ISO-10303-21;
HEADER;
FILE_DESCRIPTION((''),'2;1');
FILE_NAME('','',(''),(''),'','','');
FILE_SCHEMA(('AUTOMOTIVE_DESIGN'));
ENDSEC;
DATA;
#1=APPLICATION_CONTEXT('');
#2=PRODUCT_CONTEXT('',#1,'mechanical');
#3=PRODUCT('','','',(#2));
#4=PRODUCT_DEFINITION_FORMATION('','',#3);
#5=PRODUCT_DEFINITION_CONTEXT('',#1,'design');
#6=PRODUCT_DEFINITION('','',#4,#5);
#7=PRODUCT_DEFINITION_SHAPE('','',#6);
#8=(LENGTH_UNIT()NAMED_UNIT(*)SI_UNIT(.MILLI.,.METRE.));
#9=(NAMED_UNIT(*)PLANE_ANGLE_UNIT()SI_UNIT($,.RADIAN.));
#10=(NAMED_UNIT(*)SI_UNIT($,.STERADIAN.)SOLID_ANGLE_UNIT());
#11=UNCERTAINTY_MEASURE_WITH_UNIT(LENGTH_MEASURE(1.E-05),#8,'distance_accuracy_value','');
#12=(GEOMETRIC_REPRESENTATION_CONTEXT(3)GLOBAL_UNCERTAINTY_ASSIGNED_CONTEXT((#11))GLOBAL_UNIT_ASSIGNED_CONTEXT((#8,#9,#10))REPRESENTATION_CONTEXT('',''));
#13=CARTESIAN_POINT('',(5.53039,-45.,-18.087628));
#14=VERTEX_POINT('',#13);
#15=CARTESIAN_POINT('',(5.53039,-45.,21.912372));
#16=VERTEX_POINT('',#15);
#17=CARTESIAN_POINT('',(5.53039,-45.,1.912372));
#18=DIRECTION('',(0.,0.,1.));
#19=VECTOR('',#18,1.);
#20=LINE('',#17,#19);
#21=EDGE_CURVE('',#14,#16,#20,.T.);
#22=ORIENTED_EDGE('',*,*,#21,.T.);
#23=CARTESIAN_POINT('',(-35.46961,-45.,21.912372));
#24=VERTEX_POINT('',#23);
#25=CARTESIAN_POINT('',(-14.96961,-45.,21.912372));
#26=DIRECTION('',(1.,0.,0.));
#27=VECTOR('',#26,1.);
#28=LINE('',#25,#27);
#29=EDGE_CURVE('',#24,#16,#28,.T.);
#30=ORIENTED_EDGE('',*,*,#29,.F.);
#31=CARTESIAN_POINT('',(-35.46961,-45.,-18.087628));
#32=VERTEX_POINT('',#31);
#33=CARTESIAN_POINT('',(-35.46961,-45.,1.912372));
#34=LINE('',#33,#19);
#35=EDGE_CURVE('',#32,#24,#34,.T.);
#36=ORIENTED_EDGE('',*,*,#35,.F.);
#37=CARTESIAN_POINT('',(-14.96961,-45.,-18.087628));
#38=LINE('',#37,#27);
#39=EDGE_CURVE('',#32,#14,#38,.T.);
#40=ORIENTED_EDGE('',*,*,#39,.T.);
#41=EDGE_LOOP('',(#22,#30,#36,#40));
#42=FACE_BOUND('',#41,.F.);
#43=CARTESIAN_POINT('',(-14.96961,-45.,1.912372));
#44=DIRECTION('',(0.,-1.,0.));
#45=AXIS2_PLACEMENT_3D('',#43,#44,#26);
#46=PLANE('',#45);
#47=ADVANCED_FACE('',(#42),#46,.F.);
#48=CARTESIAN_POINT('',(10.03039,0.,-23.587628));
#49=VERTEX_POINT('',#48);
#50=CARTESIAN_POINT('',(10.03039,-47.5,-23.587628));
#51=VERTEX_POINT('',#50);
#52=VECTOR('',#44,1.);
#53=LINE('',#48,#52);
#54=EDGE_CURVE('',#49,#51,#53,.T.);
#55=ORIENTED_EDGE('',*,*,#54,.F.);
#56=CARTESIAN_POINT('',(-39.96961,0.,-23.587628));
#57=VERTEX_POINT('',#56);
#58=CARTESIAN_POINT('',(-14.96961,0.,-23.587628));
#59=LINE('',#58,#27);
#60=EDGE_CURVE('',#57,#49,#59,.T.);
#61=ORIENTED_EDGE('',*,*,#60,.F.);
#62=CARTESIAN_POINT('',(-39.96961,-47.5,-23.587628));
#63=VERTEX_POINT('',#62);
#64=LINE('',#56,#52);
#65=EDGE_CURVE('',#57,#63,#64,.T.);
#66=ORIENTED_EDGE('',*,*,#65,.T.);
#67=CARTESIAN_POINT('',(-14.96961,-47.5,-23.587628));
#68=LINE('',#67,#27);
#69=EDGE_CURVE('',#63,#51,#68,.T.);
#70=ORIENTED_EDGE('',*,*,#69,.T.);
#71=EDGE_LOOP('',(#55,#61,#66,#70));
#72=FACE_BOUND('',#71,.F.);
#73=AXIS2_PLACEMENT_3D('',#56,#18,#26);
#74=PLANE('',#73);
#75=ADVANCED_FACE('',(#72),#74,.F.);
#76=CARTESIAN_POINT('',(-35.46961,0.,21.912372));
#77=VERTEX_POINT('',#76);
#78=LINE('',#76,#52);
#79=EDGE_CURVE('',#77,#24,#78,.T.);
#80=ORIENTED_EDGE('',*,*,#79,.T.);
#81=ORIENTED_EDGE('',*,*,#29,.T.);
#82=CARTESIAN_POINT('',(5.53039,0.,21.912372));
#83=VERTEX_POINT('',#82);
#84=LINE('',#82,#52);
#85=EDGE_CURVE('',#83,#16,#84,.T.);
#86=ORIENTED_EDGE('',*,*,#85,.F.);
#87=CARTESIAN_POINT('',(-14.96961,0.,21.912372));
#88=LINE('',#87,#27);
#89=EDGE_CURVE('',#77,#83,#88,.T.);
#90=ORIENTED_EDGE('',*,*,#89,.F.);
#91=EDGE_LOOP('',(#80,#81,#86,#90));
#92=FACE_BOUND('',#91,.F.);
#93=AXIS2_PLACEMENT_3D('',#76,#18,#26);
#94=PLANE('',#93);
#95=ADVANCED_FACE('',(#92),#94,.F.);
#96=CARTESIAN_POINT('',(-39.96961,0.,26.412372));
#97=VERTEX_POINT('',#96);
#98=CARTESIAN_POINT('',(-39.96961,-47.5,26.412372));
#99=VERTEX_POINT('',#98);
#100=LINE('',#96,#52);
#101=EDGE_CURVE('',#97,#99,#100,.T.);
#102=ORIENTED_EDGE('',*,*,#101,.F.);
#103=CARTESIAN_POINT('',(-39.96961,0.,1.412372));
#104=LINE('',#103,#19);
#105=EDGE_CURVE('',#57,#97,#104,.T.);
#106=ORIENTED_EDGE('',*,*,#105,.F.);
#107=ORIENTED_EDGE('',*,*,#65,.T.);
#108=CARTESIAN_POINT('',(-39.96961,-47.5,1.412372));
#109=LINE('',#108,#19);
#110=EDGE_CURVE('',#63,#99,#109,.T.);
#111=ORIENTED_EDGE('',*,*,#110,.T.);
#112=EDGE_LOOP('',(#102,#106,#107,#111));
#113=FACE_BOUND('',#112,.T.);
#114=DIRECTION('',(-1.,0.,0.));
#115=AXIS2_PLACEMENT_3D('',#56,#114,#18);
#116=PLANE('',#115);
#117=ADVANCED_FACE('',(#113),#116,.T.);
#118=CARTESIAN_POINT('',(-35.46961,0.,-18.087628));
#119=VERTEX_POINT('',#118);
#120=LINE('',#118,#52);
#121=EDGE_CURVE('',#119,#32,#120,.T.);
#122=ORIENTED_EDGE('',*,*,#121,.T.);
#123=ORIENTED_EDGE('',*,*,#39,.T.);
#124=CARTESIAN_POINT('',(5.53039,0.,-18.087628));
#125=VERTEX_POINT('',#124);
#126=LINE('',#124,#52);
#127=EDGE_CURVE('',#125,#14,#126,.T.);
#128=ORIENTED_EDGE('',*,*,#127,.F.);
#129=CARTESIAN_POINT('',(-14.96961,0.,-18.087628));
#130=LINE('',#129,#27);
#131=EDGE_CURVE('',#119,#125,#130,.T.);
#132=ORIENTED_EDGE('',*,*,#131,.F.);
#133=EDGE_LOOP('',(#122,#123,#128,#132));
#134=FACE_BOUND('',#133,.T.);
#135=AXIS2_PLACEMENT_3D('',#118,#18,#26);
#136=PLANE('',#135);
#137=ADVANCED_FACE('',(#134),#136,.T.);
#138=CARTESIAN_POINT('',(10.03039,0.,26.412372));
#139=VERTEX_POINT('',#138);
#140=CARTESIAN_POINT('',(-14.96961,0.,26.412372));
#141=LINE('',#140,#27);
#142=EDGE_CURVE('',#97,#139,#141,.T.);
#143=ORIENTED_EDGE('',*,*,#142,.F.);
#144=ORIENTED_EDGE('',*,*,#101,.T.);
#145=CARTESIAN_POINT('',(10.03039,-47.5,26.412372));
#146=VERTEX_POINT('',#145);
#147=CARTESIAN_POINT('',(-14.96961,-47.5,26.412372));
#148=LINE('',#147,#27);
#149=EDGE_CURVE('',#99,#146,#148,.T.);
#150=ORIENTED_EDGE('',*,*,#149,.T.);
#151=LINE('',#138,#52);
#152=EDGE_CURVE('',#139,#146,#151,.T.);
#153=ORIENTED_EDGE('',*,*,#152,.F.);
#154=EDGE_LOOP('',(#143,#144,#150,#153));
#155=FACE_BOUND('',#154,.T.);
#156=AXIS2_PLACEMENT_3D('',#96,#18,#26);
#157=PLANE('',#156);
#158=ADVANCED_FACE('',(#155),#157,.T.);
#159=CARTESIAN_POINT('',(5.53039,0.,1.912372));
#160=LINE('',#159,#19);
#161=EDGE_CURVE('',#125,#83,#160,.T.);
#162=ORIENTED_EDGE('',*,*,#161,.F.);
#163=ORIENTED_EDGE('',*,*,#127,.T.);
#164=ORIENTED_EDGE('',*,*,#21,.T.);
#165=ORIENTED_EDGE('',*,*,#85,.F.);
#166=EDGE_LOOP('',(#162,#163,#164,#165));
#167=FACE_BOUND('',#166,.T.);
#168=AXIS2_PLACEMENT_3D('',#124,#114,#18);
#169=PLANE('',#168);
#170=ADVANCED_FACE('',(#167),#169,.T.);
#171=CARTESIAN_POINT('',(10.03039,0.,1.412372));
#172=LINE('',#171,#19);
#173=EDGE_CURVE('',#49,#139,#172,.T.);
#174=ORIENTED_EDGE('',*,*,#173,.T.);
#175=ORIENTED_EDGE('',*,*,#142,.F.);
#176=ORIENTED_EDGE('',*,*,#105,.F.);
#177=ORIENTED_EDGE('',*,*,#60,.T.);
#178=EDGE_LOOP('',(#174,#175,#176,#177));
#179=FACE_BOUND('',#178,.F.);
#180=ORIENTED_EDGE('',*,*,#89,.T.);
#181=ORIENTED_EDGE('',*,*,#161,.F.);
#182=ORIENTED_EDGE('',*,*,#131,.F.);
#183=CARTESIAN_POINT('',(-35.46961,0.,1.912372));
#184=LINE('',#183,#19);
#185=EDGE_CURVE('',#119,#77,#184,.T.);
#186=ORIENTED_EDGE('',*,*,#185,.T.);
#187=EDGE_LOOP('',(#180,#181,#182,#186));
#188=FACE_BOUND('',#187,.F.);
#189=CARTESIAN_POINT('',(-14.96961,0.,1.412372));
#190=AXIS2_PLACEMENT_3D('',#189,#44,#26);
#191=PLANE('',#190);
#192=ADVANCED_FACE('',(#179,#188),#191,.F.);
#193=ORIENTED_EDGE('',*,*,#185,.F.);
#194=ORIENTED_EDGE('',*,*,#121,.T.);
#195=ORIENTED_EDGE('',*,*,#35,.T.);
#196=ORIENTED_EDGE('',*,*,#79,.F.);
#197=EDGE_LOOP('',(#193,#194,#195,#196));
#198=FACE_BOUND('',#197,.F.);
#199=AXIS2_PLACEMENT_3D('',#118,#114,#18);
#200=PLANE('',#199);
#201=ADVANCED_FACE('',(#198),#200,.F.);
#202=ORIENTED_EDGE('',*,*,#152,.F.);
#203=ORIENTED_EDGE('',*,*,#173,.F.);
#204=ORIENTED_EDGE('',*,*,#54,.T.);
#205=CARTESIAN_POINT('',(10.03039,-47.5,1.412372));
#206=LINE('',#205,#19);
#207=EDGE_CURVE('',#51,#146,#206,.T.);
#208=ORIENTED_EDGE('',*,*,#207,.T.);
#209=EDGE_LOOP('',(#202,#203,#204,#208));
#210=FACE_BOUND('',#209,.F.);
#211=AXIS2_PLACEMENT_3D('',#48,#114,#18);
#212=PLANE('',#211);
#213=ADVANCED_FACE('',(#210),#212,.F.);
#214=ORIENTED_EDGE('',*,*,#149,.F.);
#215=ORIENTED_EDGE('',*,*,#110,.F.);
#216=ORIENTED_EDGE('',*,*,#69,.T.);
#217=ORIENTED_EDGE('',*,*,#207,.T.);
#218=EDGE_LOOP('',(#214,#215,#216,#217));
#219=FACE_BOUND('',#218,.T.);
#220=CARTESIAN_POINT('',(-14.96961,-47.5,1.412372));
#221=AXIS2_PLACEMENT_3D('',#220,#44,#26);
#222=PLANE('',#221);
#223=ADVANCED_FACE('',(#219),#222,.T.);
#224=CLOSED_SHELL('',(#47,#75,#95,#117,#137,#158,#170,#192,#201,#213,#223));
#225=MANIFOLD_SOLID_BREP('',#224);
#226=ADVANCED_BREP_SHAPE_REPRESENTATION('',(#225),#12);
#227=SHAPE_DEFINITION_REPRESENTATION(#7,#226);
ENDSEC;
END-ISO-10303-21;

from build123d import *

# Parameters (mm, degrees)
F0_W     = 50
F0_H     = 50
F0_W_2   = 41
F0_H_2   = 40
F1_DEPTH = 47.5
F2_DEPTH = 45


# Not quite as in the source:
# - a feature names something its author has since deleted; it is built from what else it names


with BuildPart() as f1:
    # F0 (on Front) → F1 (new body)
    with BuildSketch(Plane.XZ):
        with Locations((-14.9696101435, 1.412372324)):
            Rectangle(F0_W, F0_H)
        with Locations((-14.9696101435, 1.912372324)):
            Rectangle(F0_W_2, F0_H_2, mode=Mode.SUBTRACT)
        with Locations((-14.9696101435, 1.912372324)):
            Rectangle(F0_W_2, F0_H_2)
    extrude(amount=F1_DEPTH)

    # F0 (on Front) → F2 (cut)
    with BuildSketch(Plane.XZ):
        with Locations((-14.9696101435, 1.912372324)):
            Rectangle(F0_W_2, F0_H_2)
    extrude(amount=F2_DEPTH, mode=Mode.SUBTRACT)


solid = f1.part
